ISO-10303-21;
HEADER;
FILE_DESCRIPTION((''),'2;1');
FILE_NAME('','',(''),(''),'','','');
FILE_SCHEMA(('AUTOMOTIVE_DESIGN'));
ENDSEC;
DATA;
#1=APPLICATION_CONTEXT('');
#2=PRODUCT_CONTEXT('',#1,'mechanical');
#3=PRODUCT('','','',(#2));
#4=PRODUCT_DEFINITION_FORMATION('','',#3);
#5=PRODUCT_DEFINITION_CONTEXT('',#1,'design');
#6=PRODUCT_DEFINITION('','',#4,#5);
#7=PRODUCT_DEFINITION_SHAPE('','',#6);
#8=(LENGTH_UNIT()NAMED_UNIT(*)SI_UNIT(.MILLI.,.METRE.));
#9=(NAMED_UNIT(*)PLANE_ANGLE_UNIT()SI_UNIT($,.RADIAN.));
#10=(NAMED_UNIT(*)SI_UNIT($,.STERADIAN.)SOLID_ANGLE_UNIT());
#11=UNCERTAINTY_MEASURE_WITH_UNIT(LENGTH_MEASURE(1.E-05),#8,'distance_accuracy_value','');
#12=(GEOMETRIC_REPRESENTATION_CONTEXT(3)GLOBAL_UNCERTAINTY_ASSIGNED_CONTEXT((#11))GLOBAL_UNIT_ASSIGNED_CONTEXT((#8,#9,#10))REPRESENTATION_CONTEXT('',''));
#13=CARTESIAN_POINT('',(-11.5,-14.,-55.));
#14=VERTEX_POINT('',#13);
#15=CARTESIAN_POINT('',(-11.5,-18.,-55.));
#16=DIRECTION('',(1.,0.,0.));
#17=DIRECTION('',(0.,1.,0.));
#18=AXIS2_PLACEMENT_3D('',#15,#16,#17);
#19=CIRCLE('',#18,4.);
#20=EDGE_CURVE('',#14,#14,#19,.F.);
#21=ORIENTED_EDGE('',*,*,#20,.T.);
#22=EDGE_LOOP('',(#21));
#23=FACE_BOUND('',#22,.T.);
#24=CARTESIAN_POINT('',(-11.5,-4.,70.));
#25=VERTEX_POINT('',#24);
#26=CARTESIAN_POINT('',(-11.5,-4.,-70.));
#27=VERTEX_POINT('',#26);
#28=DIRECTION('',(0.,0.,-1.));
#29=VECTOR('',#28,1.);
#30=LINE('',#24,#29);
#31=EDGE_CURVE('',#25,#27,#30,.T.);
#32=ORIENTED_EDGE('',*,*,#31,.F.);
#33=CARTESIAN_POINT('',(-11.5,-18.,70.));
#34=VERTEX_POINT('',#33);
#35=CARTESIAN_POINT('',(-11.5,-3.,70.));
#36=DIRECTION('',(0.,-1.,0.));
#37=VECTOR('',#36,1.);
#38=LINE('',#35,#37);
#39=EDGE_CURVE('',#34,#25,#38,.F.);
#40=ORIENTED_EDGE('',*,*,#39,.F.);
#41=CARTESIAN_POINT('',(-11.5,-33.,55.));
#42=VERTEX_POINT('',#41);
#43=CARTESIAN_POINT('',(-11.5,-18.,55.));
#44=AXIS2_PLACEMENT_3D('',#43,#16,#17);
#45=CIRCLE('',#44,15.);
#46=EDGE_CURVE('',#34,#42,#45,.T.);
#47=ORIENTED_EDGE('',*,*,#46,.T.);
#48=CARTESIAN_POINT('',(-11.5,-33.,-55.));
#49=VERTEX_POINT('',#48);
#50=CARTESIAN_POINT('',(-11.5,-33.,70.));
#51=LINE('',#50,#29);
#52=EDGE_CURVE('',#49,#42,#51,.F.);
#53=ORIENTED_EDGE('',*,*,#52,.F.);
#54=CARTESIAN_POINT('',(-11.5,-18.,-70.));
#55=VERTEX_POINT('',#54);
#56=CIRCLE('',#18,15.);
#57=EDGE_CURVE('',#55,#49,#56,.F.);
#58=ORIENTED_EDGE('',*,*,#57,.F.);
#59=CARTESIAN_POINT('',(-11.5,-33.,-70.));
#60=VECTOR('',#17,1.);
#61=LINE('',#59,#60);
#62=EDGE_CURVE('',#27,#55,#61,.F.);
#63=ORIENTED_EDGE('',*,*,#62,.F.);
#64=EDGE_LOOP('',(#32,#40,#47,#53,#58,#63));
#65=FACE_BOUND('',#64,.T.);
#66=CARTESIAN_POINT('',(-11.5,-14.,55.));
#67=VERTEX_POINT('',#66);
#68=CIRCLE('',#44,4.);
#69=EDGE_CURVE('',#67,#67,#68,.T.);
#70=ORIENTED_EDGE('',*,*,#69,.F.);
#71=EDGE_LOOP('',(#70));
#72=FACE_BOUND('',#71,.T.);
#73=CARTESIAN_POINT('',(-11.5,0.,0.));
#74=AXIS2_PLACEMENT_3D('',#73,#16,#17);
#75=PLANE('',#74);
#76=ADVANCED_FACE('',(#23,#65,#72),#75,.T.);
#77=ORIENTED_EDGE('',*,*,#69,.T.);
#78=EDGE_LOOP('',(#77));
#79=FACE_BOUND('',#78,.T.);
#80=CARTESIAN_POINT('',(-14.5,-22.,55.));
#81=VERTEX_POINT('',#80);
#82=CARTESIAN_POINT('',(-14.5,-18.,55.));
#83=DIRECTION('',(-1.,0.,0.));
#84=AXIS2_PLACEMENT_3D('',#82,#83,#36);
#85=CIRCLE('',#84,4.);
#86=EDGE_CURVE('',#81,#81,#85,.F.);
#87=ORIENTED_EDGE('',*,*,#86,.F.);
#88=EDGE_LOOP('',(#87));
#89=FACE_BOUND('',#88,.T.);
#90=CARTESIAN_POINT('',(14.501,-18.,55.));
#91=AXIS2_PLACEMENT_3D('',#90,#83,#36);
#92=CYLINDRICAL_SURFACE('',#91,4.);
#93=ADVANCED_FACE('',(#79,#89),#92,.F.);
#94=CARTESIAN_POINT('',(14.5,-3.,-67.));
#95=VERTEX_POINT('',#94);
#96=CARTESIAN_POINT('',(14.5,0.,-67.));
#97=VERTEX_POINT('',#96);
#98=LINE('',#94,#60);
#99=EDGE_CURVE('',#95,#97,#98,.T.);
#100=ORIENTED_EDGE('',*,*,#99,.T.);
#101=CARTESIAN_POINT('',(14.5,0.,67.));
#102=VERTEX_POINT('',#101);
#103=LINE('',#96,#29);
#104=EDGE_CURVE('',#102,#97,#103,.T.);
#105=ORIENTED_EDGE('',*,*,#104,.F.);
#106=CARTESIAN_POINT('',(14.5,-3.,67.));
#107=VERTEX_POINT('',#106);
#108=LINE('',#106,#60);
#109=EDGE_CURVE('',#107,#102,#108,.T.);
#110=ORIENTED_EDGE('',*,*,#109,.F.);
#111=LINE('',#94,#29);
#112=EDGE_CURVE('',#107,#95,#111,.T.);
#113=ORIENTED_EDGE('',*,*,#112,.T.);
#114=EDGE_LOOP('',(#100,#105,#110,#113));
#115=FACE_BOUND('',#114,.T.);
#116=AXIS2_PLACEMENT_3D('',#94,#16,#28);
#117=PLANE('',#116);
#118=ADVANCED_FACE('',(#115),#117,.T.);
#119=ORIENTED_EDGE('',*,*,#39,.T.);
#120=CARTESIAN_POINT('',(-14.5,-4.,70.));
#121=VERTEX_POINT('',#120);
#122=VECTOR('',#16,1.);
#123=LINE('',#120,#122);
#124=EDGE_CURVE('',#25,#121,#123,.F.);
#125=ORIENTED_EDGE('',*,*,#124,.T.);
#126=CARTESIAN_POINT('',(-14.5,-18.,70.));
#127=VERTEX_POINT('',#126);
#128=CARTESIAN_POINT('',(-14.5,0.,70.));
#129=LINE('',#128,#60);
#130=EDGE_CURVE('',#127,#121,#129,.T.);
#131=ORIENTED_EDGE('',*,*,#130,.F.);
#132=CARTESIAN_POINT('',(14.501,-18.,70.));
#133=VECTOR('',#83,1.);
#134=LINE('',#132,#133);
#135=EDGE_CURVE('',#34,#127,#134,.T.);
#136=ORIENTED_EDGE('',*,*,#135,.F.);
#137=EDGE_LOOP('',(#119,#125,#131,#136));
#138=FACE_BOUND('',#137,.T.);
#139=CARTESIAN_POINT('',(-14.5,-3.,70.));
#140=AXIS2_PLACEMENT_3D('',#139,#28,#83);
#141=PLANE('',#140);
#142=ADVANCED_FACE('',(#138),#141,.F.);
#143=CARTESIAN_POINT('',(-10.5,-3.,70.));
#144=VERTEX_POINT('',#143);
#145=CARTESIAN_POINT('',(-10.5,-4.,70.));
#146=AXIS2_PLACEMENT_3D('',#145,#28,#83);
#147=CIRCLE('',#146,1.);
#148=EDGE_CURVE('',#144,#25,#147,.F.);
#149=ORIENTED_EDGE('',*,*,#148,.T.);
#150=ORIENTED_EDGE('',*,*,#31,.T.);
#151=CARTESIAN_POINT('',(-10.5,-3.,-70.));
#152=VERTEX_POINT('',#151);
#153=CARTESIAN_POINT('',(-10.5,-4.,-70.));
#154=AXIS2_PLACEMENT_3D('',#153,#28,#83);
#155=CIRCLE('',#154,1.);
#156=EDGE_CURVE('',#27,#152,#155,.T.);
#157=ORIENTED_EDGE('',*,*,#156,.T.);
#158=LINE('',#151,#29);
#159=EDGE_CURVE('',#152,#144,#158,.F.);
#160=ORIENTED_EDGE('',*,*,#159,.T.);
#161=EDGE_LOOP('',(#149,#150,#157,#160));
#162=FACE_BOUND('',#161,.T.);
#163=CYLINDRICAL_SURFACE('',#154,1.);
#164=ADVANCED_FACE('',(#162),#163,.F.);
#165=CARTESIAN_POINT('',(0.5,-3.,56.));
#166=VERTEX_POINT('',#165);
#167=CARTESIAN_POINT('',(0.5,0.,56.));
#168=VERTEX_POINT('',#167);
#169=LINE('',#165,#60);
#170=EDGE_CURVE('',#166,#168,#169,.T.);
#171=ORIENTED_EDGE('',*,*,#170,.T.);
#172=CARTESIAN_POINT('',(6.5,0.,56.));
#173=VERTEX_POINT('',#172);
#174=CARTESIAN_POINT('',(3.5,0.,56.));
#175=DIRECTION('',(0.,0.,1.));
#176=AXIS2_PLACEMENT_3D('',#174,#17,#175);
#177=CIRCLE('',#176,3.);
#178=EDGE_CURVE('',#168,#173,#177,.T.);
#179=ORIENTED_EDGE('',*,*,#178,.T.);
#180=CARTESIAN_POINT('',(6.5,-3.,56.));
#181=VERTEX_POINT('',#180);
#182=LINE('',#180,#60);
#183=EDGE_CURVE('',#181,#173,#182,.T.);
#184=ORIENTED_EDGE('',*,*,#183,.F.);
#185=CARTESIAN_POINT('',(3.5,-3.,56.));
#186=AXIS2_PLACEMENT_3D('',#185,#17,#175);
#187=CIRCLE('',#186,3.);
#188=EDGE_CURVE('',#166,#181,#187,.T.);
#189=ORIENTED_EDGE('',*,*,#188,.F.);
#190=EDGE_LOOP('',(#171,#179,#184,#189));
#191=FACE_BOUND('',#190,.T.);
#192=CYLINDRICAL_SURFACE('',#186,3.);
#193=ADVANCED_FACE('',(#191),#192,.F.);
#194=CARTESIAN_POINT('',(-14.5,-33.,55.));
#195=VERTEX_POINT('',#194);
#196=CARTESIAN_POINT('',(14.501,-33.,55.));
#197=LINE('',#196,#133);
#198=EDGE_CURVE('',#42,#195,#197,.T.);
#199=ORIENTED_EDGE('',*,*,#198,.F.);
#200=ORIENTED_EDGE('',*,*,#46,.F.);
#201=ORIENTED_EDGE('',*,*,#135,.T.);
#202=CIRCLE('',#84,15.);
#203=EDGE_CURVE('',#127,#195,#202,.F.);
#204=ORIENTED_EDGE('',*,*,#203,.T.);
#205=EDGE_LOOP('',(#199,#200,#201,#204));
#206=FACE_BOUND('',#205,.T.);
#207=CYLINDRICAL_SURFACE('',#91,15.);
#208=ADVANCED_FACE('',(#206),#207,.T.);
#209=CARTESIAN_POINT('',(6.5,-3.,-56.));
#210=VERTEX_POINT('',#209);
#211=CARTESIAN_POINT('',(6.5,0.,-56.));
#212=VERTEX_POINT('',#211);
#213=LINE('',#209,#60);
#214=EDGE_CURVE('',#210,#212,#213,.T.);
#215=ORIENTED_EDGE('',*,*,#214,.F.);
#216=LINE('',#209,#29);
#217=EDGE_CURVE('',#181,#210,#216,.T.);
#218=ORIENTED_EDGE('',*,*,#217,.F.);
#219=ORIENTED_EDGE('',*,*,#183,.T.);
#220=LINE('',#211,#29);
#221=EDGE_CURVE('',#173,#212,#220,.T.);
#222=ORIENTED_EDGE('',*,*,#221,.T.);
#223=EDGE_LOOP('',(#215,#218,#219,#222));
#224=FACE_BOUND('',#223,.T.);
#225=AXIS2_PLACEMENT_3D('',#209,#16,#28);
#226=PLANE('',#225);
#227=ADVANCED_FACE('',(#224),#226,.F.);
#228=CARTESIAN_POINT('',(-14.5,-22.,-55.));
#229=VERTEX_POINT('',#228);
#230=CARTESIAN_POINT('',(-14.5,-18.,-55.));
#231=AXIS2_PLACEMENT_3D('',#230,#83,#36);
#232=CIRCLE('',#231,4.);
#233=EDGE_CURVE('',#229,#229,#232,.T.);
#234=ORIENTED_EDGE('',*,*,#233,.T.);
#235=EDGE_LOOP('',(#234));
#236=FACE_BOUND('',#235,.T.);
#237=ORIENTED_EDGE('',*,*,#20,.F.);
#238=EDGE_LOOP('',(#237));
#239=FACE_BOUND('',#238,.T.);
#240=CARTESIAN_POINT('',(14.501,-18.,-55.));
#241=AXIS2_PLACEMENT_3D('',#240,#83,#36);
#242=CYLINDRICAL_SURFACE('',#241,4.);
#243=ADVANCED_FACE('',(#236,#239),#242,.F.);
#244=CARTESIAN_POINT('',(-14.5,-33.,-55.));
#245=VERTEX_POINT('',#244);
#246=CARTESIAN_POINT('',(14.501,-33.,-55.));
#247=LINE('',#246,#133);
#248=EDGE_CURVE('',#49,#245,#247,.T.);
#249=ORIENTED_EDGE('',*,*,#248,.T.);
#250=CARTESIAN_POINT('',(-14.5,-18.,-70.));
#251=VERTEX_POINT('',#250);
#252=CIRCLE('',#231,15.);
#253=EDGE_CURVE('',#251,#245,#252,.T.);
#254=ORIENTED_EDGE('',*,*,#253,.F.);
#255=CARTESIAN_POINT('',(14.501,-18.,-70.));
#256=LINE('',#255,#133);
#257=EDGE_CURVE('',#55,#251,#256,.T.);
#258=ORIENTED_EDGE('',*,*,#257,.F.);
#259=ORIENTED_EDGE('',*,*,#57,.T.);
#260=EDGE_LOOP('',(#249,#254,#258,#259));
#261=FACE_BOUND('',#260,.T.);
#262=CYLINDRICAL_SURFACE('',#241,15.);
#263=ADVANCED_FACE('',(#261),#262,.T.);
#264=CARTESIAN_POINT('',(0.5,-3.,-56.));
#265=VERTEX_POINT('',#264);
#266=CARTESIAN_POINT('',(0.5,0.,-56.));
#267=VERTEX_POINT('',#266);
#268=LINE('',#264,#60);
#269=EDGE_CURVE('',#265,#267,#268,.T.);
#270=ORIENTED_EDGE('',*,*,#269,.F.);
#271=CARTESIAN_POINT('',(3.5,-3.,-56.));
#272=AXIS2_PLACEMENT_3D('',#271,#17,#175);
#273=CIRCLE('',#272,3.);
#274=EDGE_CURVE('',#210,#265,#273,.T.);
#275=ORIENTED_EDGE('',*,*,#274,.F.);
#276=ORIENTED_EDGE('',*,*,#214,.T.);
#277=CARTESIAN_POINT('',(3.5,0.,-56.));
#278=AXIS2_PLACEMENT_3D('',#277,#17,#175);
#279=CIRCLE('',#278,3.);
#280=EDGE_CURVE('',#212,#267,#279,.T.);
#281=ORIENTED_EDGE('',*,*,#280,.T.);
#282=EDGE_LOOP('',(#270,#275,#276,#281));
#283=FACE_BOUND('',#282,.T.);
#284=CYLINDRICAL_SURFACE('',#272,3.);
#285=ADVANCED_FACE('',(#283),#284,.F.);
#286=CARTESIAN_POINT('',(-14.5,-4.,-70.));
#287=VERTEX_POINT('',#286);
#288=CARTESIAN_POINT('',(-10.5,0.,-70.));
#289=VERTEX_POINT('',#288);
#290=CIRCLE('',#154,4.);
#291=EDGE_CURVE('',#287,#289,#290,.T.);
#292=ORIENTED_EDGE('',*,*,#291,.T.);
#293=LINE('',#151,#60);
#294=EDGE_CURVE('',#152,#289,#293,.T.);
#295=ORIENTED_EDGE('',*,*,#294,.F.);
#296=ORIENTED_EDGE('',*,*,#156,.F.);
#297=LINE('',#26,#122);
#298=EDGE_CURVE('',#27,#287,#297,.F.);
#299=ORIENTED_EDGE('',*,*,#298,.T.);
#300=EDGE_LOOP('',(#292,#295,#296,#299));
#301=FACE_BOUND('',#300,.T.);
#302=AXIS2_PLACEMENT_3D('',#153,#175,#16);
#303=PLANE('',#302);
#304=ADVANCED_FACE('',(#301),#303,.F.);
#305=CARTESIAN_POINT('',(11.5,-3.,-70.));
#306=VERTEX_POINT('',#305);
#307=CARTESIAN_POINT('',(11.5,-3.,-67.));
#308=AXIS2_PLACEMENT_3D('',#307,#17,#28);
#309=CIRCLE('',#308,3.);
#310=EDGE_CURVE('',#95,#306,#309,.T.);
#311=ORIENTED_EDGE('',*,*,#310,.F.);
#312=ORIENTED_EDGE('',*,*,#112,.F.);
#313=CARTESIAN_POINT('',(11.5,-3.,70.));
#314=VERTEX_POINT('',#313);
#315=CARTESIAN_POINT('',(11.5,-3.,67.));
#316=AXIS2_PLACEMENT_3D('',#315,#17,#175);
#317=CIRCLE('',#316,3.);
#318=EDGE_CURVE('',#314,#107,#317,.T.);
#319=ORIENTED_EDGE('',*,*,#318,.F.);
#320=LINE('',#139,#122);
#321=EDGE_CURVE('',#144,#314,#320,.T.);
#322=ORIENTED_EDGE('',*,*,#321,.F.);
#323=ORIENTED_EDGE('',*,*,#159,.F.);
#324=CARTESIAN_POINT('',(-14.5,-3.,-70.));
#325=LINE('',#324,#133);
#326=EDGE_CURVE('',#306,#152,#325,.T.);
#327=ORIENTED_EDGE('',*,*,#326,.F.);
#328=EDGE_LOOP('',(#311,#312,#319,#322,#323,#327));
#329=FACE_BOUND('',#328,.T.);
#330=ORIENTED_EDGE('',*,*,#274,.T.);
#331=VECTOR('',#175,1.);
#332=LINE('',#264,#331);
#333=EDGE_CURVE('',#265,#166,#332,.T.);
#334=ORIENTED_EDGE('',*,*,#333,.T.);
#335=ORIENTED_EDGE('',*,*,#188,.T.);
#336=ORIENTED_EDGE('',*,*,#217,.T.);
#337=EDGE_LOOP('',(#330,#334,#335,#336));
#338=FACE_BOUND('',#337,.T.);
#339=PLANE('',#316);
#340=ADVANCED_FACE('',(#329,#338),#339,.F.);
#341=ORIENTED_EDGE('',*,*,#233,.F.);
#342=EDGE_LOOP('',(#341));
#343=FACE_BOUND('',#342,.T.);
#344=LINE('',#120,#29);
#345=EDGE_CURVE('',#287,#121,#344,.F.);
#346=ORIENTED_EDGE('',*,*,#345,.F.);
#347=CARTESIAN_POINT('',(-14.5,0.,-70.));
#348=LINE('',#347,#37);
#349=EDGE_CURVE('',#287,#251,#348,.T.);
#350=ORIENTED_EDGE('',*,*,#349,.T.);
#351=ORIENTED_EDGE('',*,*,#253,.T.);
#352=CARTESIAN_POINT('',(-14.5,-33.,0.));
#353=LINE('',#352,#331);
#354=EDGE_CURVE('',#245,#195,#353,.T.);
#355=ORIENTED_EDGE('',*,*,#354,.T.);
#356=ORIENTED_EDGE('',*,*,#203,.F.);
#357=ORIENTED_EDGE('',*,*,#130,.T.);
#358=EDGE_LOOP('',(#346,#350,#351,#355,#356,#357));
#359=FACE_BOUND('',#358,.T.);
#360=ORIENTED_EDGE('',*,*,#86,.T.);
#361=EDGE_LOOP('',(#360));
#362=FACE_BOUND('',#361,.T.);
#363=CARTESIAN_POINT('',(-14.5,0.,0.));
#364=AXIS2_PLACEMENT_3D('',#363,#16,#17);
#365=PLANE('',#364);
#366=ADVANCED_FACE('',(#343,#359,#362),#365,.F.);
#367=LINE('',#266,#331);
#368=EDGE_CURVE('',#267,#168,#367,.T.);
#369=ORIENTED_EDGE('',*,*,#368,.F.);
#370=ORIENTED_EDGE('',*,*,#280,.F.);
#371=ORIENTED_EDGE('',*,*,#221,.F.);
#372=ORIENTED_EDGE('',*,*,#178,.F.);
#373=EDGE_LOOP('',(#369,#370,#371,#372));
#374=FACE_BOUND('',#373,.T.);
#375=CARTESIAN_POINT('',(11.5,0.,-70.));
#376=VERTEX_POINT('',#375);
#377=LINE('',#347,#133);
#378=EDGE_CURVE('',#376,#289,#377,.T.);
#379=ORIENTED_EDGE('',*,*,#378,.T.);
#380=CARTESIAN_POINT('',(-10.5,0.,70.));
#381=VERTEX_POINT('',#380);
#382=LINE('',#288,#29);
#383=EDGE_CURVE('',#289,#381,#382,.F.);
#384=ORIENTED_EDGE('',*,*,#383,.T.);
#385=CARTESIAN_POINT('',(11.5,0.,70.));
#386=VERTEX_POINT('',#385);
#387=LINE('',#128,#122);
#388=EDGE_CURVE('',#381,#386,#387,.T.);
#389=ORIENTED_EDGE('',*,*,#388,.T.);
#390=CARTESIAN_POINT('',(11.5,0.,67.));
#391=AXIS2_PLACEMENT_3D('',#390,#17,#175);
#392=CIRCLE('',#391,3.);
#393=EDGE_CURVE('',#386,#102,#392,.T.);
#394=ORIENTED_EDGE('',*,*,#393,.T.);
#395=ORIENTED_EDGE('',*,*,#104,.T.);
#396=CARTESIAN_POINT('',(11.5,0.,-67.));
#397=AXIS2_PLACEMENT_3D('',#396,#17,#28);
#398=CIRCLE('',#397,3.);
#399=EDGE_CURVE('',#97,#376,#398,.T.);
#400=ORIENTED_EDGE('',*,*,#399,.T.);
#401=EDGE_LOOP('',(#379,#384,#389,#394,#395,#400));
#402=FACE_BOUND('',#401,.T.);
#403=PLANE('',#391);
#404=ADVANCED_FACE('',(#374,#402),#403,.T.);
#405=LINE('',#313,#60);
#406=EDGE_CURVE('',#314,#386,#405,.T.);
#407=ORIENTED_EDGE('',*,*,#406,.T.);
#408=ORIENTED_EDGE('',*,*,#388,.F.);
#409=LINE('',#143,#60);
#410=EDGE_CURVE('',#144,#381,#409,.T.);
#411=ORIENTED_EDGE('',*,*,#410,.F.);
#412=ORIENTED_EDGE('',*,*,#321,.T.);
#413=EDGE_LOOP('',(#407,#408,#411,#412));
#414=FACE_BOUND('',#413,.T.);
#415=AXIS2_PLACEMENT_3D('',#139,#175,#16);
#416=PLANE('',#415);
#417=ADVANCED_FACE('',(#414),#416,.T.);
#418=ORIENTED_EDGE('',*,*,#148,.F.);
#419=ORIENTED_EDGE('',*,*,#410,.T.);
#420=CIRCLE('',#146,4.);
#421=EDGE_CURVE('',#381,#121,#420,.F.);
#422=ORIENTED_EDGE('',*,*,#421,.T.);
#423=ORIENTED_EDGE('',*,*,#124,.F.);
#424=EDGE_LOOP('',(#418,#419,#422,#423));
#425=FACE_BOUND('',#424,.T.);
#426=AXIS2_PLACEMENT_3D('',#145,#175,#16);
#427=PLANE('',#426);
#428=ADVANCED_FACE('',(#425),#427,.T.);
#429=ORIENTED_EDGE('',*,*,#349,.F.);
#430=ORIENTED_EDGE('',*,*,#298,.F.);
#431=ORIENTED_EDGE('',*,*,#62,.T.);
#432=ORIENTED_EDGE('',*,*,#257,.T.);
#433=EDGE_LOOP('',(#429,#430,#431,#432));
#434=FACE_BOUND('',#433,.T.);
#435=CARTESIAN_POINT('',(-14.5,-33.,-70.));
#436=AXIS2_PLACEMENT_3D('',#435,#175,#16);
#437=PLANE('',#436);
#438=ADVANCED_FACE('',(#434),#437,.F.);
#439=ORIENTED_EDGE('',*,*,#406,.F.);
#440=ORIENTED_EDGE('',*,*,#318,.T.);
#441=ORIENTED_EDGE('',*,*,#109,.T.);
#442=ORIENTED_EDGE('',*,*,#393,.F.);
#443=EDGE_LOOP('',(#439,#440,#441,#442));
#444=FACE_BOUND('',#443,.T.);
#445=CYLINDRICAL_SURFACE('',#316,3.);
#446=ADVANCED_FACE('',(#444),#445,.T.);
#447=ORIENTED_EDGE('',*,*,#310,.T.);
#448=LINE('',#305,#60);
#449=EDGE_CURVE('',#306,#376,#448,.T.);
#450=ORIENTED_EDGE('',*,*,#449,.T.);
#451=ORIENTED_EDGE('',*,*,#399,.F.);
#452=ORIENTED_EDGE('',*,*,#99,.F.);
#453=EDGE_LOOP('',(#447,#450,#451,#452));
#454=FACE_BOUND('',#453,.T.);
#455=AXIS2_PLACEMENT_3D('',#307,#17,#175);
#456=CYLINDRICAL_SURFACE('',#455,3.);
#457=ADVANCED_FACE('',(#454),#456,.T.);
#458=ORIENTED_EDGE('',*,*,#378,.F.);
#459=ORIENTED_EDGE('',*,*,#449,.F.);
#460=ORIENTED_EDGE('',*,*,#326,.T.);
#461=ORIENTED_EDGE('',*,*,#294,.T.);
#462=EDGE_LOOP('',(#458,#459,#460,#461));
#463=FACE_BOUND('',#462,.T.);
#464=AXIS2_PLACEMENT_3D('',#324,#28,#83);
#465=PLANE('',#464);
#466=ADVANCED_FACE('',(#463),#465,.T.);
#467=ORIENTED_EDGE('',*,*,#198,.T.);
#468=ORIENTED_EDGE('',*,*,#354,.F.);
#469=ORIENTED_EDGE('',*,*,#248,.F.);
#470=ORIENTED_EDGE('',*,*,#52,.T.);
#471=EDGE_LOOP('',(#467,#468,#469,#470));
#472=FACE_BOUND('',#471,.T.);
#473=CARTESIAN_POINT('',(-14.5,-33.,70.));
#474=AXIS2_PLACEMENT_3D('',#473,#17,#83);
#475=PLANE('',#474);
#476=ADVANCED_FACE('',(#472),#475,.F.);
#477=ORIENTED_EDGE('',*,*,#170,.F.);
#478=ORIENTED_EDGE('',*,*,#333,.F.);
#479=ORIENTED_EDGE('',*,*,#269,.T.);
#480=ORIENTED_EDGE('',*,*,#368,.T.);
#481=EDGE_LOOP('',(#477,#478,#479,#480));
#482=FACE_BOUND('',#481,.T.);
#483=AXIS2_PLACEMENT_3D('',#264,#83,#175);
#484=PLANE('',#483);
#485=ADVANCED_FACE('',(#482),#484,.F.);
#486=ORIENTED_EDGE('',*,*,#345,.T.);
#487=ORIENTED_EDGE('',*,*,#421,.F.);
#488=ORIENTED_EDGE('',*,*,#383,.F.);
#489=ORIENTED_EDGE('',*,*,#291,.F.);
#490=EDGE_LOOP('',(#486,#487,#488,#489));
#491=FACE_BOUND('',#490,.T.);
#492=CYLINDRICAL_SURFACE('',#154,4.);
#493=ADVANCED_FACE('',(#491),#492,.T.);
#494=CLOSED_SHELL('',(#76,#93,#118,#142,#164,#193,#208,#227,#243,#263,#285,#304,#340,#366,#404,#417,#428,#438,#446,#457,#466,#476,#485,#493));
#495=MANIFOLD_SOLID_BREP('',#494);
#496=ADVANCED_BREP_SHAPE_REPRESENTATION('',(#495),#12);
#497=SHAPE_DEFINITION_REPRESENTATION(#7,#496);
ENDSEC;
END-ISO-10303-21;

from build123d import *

# Parameters (mm, degrees)
BASE_FLANGE1_DEPTH           = 3
EDGE_FLANGE1_STRIP_W         = 14
EDGE_FLANGE1_STRIP_H         = 3
EDGE_FLANGE1_STRIP_CUT_DEPTH = 140
EDGE_FLANGE1_DEPTH           = 140
CUT_EXTRUDE1_REACH           = 84.644
SKETCH10_R                   = 4


# Sheet-metal steps are written as plain solids
with BuildPart() as part:
    # Sketch1 → Base-Flange1 (new body)
    with BuildSketch(Plane(origin=(0, 0, 0), x_dir=(1, 0, 0), z_dir=(0, 1, 0))):
        with BuildLine():
            Line((-14.5, 70), (11.5, 70))
            ThreePointArc((11.5, 70), (13.621320344, 69.121320344), (14.5, 67))
            Line((14.5, 67), (14.5, -67))
            ThreePointArc((14.5, -67), (13.621320344, -69.121320344), (11.5, -70))
            Line((11.5, -70), (-14.5, -70))
            Line((-14.5, -70), (-14.5, 70))
        make_face()
        with BuildLine():
            Line((6.5, 56), (6.5, -56))
            ThreePointArc((6.5, -56), (3.5, -59), (0.5, -56))
            Line((0.5, -56), (0.5, 56))
            ThreePointArc((0.5, 56), (3.5, 59), (6.5, 56))
        make_face(mode=Mode.SUBTRACT)
    extrude(amount=-BASE_FLANGE1_DEPTH)

    # Edge-Flange1 strip (across the edge) → Edge-Flange1 strip cut (cut)
    with BuildSketch(Plane(origin=(-14.5, -3, 70), x_dir=(1, 0, 0), z_dir=(0, 0, -1))):
        with Locations((-3, -1.5)):
            Rectangle(EDGE_FLANGE1_STRIP_W, EDGE_FLANGE1_STRIP_H)
    extrude(amount=EDGE_FLANGE1_STRIP_CUT_DEPTH, mode=Mode.SUBTRACT)

    # Edge-Flange1 section (across the edge) → Edge-Flange1 (add)
    with BuildSketch(Plane(origin=(-14.5, -3, 70), x_dir=(1, 0, 0), z_dir=(0, 0, -1))):
        with BuildLine():
            Line((0, 1), (0, 30))
            Line((0, 30), (3, 30))
            Line((3, 30), (3, 1))
            ThreePointArc((3, 1), (3.292893219, 0.292893219), (4, 0))
            Line((4, 0), (4, -3))
            ThreePointArc((4, -3), (1.171572875, -1.828427125), (0, 1))
        make_face()
    extrude(amount=EDGE_FLANGE1_DEPTH)

    # Sketch10 → Cut-Extrude1 (cut, up to next)
    with BuildSketch(Plane.ZY.offset(14.5), mode=Mode.PRIVATE) as cut_extrude1_sk1:
        with BuildLine():
            ThreePointArc((-55, -33), (-65.606601718, -28.606601718), (-70, -18))
            Line((-70, -18), (-70, -33))
            Line((-70, -33), (-55, -33))
        make_face()
    cut_extrude1_tool1 = extrude(cut_extrude1_sk1.sketch, amount=-CUT_EXTRUDE1_REACH, mode=Mode.PRIVATE) & part.part
    # Sketch10 → Cut-Extrude1 (cut, up to next)
    with BuildSketch(Plane.ZY.offset(14.5), mode=Mode.PRIVATE) as cut_extrude1_sk2:
        with BuildLine():
            Line((55, -33), (70, -33))
            Line((70, -33), (70, -18))
            ThreePointArc((70, -18), (65.606601718, -28.606601718), (55, -33))
        make_face()
    cut_extrude1_tool2 = extrude(cut_extrude1_sk2.sketch, amount=-CUT_EXTRUDE1_REACH, mode=Mode.PRIVATE) & part.part
    # Sketch10 → Cut-Extrude1 (cut, up to next)
    with BuildSketch(Plane.ZY.offset(14.5), mode=Mode.PRIVATE) as cut_extrude1_sk3:
        with Locations(Location((-55, -18, 0), (0, 0, 270))):
            Circle(SKETCH10_R)
    cut_extrude1_tool3 = extrude(cut_extrude1_sk3.sketch, amount=-CUT_EXTRUDE1_REACH, mode=Mode.PRIVATE) & part.part
    # Sketch10 → Cut-Extrude1 (cut, up to next)
    with BuildSketch(Plane.ZY.offset(14.5), mode=Mode.PRIVATE) as cut_extrude1_sk4:
        with Locations(Location((55, -18, 0), (0, 0, 270))):
            Circle(SKETCH10_R)
    cut_extrude1_tool4 = extrude(cut_extrude1_sk4.sketch, amount=-CUT_EXTRUDE1_REACH, mode=Mode.PRIVATE) & part.part
    add(cut_extrude1_tool1.solids().sort_by_distance((-14.5, -29.649481, -66.649481))[0], mode=Mode.SUBTRACT)
    add(cut_extrude1_tool2.solids().sort_by_distance((-14.5, -29.649481, 66.649481))[0], mode=Mode.SUBTRACT)
    add(cut_extrude1_tool3.solids().sort_by_distance((-14.5, -18, -55))[0], mode=Mode.SUBTRACT)
    add(cut_extrude1_tool4.solids().sort_by_distance((-14.5, -18, 55))[0], mode=Mode.SUBTRACT)


solid = part.part
